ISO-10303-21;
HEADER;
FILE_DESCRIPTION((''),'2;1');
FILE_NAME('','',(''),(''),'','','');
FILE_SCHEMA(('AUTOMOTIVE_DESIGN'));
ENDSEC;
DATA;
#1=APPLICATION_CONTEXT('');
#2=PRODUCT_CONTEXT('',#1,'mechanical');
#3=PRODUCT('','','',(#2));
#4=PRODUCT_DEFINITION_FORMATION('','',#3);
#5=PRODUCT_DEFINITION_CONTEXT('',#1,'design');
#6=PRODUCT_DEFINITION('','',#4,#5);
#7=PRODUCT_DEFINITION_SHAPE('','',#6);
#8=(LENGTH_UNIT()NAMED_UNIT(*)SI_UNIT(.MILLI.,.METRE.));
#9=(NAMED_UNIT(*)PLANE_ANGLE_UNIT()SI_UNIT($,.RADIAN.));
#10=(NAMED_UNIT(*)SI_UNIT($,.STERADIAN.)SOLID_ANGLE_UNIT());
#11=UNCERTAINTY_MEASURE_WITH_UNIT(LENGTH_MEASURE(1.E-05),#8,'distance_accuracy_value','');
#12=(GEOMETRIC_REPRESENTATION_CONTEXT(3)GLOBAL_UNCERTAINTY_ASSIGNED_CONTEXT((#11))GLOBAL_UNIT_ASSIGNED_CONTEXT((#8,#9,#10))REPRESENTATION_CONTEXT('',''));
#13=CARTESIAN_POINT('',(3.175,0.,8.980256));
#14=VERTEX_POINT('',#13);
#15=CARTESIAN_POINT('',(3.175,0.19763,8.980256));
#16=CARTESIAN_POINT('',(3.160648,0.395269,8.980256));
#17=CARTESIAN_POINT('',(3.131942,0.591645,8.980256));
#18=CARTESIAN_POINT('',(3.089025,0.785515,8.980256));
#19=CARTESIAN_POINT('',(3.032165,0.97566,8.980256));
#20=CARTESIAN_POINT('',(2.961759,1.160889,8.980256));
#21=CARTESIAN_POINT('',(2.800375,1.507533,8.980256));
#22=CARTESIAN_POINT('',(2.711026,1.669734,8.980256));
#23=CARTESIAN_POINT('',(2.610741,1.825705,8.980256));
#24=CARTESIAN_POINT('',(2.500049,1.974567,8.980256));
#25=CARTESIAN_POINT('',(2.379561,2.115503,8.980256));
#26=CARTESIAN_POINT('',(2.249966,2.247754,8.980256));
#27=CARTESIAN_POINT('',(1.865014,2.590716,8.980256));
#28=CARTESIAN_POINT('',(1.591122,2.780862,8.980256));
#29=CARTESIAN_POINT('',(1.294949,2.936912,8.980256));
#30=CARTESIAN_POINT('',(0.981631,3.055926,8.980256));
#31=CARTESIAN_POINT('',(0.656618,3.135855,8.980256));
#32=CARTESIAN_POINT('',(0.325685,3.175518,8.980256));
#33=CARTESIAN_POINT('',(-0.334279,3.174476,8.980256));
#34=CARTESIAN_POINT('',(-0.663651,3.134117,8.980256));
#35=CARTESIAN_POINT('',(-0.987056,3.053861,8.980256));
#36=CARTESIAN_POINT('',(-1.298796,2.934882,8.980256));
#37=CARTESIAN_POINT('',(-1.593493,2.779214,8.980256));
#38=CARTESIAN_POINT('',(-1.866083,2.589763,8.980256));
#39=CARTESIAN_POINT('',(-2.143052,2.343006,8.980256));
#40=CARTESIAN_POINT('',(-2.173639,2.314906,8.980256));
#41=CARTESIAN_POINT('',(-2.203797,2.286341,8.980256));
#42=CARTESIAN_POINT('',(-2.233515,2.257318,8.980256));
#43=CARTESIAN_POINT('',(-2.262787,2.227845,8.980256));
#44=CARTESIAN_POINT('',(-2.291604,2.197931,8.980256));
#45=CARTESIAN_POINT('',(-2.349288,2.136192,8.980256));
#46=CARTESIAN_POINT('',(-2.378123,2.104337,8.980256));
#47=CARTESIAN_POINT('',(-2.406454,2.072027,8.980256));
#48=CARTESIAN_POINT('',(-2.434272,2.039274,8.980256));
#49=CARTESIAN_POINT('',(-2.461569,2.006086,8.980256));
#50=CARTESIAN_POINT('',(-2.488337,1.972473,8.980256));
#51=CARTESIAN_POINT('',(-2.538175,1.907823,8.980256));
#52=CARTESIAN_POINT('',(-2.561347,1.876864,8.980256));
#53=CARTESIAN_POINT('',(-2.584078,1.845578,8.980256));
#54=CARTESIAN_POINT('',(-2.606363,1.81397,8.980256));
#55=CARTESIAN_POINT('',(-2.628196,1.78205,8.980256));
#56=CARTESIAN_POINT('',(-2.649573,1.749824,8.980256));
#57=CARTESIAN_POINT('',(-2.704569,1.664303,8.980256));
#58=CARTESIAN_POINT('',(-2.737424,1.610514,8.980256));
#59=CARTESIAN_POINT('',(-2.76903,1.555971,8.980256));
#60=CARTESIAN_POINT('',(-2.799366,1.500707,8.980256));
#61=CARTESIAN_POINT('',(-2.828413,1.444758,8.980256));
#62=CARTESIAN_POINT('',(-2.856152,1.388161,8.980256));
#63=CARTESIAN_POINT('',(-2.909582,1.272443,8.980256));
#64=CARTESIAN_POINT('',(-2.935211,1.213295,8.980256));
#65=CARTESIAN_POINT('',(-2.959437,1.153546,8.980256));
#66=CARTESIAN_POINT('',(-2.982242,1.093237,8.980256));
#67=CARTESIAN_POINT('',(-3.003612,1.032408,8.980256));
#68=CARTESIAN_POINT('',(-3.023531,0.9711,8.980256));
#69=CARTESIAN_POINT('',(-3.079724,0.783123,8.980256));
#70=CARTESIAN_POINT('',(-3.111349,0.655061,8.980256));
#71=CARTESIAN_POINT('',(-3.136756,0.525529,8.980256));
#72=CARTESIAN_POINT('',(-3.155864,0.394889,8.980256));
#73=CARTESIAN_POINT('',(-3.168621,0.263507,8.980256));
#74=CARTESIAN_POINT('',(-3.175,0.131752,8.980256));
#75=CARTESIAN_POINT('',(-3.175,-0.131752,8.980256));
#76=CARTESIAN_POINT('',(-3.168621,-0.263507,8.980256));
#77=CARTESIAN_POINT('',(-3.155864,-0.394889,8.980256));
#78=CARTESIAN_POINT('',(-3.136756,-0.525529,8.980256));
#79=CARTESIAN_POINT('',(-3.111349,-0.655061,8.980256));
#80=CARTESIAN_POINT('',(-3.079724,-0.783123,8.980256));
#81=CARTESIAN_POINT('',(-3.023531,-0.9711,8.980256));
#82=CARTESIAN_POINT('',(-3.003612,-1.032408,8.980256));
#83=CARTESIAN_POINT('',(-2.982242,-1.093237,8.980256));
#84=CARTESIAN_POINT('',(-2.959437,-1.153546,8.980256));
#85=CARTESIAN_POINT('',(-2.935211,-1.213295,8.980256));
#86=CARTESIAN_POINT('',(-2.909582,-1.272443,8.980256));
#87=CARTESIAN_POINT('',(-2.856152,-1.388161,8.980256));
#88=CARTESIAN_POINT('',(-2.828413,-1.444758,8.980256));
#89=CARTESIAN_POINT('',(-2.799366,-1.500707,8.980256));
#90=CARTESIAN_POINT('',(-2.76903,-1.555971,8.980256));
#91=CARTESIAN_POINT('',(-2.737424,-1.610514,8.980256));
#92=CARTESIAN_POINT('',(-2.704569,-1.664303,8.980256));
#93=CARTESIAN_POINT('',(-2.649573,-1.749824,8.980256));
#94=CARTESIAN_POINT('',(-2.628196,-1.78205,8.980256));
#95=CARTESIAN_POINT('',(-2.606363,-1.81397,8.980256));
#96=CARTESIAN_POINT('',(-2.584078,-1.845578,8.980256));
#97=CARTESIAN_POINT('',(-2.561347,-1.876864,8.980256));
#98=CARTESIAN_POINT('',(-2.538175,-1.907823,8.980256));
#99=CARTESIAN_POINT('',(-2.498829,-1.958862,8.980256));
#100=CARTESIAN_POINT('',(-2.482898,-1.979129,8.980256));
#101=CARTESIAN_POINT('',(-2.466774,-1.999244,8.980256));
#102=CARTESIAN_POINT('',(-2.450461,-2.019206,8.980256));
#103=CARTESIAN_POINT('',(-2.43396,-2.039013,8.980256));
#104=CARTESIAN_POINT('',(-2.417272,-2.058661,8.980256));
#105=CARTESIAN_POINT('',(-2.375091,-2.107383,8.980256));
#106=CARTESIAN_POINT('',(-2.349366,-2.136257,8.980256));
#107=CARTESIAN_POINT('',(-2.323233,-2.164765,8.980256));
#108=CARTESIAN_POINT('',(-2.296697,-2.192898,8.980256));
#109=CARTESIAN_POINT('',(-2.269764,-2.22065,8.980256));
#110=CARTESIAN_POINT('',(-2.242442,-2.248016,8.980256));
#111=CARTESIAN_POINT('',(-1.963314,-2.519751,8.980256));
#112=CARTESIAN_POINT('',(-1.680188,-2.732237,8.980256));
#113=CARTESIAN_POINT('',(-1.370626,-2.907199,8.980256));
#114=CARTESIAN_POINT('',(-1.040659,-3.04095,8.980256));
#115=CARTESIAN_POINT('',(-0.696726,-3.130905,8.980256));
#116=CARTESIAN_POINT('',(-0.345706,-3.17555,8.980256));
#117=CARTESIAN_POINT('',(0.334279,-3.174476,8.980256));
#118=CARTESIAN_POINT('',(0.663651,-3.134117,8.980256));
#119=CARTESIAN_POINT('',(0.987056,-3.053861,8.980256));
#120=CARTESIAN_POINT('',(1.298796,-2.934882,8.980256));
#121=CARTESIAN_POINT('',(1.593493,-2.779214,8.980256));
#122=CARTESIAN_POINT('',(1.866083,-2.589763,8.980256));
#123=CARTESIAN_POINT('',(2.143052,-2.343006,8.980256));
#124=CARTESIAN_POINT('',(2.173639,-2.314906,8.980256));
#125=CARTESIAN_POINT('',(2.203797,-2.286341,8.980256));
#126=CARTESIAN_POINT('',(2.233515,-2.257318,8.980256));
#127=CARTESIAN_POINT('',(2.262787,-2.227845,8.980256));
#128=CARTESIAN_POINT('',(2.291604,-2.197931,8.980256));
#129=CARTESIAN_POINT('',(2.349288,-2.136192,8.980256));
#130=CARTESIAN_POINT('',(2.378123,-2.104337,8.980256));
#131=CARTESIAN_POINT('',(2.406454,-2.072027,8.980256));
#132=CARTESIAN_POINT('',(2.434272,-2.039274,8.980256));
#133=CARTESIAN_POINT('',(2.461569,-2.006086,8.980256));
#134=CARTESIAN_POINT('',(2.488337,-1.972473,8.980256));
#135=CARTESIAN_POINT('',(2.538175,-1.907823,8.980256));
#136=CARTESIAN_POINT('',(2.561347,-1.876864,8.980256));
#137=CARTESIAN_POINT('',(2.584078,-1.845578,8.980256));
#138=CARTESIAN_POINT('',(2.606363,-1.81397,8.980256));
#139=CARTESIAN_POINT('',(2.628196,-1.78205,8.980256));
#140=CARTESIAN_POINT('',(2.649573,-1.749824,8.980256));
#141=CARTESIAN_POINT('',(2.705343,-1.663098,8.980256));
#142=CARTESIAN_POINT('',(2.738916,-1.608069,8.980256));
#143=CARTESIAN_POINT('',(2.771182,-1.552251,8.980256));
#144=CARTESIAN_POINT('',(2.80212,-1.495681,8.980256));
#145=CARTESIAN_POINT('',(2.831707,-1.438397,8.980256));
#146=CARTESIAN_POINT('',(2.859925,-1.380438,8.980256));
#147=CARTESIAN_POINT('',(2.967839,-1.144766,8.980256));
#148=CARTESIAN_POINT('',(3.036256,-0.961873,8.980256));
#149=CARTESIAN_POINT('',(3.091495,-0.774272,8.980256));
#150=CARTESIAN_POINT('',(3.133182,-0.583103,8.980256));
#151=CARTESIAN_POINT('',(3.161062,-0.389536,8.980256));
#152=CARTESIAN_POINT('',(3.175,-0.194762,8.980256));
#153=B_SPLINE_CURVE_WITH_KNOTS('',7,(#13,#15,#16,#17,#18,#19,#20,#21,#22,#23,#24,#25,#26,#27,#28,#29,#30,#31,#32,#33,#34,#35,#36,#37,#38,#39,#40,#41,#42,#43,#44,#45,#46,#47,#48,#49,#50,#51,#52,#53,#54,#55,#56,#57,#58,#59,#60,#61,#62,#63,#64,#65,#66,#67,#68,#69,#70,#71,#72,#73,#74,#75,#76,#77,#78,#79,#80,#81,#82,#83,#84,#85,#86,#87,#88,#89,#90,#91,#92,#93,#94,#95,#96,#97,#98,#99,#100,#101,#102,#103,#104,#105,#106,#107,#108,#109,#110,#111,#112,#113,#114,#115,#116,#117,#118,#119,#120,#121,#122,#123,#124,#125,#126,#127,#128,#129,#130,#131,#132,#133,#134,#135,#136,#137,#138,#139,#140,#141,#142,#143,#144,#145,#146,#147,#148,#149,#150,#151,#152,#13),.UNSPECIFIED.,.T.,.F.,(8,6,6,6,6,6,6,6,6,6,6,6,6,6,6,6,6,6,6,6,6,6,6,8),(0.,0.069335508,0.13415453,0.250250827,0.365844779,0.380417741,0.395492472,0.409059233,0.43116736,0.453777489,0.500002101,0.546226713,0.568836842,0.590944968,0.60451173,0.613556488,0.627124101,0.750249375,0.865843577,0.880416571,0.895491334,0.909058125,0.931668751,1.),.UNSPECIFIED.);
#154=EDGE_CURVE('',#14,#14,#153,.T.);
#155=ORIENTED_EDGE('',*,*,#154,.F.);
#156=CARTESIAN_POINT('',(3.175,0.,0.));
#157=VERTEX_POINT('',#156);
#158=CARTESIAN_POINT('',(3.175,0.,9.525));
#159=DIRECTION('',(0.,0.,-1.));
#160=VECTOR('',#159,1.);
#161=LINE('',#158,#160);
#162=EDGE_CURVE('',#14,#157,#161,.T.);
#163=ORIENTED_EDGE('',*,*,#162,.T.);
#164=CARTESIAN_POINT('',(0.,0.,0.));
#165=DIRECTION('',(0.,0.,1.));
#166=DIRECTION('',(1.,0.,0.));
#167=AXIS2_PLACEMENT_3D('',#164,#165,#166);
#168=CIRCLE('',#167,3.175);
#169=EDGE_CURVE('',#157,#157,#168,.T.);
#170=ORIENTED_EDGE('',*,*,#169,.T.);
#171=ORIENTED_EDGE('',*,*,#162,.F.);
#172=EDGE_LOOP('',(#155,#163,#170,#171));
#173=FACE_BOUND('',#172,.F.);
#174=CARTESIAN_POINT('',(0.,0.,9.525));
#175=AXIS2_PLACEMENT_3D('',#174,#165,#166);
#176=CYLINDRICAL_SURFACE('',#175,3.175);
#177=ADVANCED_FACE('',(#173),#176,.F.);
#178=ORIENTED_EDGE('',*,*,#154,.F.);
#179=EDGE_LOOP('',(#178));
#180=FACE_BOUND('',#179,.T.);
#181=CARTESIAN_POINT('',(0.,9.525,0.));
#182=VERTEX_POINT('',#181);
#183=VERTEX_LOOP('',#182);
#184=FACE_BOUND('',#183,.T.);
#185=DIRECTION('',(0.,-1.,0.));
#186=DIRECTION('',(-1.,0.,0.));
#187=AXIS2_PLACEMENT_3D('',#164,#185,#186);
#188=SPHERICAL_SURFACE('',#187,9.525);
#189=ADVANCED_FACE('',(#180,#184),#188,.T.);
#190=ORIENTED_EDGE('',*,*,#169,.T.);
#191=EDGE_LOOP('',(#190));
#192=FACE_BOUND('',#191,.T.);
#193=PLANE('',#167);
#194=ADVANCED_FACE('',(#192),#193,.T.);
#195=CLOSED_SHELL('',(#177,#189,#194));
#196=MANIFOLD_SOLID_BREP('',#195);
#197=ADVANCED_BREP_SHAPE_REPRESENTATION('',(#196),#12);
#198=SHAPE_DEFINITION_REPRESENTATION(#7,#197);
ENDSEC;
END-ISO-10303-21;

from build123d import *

# Parameters (mm, degrees)
F4_R     = 3.175
F5_DEPTH = 9.525


# Not quite as in the source:
# - a length typed as a fraction of an inch, garbled in the dataset ("3 / 203.2 mm" for 3/8 in), is restored


with BuildPart() as f2:
    # F1 (on Top) → F2 (revolve)
    with BuildSketch(Plane.XY):
        with BuildLine():
            Line((0, -9.525), (0, 9.525))
            ThreePointArc((0, 9.525), (-9.525, 0), (0, -9.525))
        make_face()
    revolve(axis=Axis((0, 0, 0), (0, -1, 0)))

    # F4 (on offset) → F5 (cut)
    with BuildSketch(Plane.XY.offset(9.525)):
        Circle(F4_R)
    extrude(amount=-F5_DEPTH, mode=Mode.SUBTRACT)


solid = f2.part
